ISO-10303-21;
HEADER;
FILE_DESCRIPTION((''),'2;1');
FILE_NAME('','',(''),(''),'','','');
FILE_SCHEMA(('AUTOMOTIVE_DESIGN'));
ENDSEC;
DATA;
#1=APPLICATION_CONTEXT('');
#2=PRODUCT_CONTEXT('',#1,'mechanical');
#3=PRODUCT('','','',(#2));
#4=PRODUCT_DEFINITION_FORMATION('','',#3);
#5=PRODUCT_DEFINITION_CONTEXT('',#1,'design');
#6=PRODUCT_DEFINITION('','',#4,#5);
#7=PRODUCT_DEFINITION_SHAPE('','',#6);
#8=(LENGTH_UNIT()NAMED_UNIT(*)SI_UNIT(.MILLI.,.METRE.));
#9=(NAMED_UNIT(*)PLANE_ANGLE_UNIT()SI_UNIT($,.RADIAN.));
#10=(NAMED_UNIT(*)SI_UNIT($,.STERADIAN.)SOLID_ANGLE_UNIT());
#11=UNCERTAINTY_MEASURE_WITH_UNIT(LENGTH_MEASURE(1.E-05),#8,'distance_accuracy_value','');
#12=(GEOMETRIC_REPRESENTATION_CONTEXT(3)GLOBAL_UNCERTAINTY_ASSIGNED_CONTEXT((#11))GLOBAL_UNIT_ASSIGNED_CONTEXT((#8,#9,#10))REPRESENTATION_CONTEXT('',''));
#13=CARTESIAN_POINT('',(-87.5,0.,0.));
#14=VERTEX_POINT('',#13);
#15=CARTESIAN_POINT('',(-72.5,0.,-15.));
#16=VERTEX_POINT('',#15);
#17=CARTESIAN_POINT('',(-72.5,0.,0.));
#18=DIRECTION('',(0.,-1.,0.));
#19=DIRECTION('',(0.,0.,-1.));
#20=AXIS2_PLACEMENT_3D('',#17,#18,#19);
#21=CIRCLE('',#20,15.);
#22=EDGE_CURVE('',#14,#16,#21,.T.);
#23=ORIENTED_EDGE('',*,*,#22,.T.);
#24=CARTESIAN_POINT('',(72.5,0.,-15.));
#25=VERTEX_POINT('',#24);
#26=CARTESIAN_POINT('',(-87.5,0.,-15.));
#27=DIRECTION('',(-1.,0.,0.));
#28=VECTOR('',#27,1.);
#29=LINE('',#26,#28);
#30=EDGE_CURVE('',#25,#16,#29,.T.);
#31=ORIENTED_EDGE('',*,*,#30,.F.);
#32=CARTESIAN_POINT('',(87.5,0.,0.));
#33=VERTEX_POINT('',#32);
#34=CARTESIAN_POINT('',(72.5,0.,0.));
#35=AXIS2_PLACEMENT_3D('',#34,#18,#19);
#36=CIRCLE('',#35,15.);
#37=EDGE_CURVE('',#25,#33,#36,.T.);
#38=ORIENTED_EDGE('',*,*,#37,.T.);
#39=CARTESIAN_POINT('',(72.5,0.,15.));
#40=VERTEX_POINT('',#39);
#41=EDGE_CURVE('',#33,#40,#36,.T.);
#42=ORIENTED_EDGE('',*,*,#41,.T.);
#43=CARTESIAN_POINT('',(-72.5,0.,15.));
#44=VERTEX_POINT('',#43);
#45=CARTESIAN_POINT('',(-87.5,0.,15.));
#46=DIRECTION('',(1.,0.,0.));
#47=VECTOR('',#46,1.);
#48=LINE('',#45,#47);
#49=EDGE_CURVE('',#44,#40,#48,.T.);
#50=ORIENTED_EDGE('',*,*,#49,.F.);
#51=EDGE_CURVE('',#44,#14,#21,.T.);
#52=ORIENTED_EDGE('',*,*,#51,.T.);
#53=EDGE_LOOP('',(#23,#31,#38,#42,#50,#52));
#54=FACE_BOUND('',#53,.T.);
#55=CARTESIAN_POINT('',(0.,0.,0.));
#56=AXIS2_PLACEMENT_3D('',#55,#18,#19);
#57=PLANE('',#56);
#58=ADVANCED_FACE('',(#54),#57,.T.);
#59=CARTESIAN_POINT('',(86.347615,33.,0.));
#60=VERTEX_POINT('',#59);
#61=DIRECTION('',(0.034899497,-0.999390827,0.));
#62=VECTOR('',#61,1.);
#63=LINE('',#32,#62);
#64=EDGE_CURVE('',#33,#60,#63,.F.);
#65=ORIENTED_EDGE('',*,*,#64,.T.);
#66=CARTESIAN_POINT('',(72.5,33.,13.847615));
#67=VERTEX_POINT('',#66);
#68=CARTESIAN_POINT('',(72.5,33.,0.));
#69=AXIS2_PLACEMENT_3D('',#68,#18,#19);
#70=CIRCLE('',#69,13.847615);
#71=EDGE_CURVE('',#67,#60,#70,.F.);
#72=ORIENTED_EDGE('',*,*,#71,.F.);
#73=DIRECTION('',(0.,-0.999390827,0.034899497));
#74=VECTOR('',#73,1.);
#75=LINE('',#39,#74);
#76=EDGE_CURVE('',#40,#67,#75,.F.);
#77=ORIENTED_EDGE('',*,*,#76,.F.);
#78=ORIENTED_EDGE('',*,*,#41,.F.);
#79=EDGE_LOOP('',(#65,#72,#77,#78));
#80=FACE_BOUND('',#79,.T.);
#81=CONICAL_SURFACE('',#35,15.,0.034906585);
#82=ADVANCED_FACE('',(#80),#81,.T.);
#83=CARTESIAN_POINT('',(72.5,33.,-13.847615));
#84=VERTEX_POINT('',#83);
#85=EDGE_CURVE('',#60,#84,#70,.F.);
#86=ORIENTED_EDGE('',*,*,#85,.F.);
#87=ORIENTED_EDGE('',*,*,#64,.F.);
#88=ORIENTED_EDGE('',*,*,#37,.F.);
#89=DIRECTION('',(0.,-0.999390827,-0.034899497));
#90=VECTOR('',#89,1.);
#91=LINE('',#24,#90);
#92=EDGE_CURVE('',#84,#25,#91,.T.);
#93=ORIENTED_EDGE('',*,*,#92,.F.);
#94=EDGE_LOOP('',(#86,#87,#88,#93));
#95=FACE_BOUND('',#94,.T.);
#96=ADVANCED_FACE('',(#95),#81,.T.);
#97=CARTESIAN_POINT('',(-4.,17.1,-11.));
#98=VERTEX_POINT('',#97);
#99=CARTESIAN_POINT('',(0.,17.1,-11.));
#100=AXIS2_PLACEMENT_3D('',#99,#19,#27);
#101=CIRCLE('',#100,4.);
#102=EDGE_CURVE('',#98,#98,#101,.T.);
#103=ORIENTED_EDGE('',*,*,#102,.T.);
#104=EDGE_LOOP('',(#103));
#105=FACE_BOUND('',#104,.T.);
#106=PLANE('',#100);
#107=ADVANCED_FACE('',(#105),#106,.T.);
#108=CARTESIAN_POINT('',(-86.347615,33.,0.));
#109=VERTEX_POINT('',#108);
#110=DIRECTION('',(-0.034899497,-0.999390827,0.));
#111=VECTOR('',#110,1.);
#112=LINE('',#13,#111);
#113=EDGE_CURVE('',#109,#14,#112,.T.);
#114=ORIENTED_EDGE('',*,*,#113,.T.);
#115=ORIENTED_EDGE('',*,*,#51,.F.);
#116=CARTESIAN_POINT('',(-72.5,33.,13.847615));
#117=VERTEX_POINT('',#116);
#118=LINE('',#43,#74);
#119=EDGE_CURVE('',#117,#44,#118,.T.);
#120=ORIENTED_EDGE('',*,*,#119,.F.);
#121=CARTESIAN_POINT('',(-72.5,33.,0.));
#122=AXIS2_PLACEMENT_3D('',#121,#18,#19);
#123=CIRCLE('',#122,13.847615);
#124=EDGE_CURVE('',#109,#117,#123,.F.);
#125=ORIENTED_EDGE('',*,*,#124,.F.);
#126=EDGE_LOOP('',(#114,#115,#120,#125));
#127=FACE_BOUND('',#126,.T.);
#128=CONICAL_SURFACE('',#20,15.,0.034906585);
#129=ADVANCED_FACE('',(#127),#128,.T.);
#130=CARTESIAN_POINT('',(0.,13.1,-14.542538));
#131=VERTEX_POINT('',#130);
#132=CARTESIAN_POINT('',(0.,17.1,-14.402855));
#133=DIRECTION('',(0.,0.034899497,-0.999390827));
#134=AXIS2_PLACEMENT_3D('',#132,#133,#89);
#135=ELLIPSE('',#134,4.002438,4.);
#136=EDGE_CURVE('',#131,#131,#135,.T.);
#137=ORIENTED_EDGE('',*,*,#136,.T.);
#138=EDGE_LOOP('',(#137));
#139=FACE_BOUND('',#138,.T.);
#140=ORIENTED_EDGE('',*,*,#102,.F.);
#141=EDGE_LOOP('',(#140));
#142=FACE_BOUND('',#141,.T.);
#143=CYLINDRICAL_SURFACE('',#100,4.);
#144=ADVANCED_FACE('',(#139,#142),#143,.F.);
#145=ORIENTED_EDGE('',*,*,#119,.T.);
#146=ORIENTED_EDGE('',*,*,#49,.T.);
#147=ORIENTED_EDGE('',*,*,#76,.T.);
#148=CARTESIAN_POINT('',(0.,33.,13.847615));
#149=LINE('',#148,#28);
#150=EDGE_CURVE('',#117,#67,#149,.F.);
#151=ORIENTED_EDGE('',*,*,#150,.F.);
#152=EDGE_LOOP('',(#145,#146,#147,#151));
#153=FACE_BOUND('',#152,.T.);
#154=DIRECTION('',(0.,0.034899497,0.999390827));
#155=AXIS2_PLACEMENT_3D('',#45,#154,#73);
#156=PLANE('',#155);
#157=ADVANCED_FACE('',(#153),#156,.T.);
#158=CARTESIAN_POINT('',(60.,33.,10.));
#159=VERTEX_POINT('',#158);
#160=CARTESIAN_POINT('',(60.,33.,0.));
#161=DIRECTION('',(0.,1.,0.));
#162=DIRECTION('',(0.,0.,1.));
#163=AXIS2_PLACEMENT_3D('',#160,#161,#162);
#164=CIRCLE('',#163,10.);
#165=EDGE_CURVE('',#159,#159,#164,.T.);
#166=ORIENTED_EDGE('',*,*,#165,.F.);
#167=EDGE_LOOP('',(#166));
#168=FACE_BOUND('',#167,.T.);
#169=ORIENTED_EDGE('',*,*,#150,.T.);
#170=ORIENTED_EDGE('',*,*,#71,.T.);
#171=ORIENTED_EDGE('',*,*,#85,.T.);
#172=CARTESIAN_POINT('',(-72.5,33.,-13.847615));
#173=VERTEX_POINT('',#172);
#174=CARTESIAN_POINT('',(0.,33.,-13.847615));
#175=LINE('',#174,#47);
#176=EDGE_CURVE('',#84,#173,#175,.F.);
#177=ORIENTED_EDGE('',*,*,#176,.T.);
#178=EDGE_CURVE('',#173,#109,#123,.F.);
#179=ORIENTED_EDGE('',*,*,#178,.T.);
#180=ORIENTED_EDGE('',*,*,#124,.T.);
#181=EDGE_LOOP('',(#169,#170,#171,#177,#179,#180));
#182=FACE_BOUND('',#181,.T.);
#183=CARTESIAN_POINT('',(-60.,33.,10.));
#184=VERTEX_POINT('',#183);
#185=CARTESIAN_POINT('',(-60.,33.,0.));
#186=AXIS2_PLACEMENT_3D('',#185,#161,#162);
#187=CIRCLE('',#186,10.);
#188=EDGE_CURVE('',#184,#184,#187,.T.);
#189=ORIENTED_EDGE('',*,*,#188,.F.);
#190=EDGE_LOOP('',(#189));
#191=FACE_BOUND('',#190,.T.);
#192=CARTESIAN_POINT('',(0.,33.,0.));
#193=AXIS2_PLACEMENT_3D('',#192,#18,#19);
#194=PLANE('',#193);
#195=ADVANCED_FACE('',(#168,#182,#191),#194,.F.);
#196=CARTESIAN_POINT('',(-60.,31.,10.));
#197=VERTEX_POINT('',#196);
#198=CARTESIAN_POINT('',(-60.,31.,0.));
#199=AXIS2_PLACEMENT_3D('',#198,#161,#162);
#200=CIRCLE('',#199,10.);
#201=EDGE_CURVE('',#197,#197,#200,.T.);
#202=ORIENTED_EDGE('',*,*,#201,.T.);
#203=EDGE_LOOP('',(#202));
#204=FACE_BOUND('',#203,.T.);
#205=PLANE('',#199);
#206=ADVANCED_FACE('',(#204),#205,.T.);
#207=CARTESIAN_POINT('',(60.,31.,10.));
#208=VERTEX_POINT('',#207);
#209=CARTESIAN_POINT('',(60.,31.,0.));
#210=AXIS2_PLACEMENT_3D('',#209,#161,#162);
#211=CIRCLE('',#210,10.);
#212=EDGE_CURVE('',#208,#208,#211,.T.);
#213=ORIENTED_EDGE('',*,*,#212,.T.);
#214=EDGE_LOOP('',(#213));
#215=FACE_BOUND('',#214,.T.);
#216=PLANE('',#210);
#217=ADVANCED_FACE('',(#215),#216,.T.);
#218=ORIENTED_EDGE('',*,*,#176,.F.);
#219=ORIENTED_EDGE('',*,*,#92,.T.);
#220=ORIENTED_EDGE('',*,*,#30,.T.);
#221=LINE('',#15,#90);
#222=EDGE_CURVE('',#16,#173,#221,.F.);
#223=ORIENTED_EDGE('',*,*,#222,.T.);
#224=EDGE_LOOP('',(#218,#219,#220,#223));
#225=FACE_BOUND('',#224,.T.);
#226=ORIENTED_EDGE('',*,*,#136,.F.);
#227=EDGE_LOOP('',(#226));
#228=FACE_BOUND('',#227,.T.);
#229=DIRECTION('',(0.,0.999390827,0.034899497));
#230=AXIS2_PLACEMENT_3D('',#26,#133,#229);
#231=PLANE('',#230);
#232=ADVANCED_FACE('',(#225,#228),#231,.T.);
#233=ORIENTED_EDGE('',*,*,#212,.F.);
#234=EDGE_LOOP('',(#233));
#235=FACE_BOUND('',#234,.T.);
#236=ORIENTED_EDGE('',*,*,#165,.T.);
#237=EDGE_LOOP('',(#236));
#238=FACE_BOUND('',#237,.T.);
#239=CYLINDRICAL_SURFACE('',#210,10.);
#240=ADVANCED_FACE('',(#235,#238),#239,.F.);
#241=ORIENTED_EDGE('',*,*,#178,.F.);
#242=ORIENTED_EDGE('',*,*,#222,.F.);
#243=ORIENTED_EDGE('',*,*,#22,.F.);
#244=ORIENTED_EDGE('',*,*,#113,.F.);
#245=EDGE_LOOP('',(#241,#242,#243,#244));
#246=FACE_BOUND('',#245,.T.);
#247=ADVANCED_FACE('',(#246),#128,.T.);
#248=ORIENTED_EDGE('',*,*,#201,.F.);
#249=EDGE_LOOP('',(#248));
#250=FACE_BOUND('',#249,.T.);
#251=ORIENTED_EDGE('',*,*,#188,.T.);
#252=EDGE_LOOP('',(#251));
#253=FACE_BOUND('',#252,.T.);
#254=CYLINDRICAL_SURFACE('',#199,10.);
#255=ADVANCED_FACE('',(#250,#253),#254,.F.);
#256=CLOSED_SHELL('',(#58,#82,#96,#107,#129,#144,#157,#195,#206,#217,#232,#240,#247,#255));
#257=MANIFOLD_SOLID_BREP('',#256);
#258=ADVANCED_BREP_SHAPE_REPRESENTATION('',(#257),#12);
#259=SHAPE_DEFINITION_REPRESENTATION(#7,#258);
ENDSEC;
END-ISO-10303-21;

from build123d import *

# Parameters (mm, degrees)
SKETCH1_W           = 175
SKETCH1_H           = 30
BOSS_EXTRUDE1_DEPTH = 33
SKETCH3_R           = 10
CUT_EXTRUDE1_DEPTH  = 2
FILLET1_R           = 15
SKETCH4_R           = 4
CUT_EXTRUDE2_DEPTH  = 4
DRAFT3_ANGLE        = -2


with BuildPart() as part:
    # Sketch1 → Boss-Extrude1 (new body)
    with BuildSketch(Plane(origin=(0, 0, 0), x_dir=(1, 0, 0), z_dir=(0, 1, 0))):
        Rectangle(SKETCH1_W, SKETCH1_H)
    extrude(amount=BOSS_EXTRUDE1_DEPTH)

    # Sketch3 → Cut-Extrude1 (cut)
    with BuildSketch(Plane(origin=(0, 33, 0), x_dir=(1, 0, 0), z_dir=(0, 1, 0))):
        with Locations(Location((-60, 0, 0), (0, 0, 270))):
            Circle(SKETCH3_R)
        with Locations(Location((60, 0, 0), (0, 0, 270))):
            Circle(SKETCH3_R)
    extrude(amount=-CUT_EXTRUDE1_DEPTH, mode=Mode.SUBTRACT)

    # Fillet1
    fillet1_edges = [part.edges().sort_by_distance(p)[0] for p in [
        (-87.5, 16.5, -15),
        (87.5, 16.5, 15),
        (87.5, 16.5, -15),
        (-87.5, 16.5, 15),
    ]]
    fillet(fillet1_edges, radius=FILLET1_R - 0.0001)  # a hair under: the kernel refuses the full size

    # Sketch4 → Cut-Extrude2 (cut)
    with BuildSketch(Plane(origin=(0, 0, -15), x_dir=(-1, 0, 0), z_dir=(0, 0, -1))):
        with Locations((0, 17.1)):
            Circle(SKETCH4_R)
    extrude(amount=-CUT_EXTRUDE2_DEPTH, mode=Mode.SUBTRACT)

    # Draft3
    draft3_faces = [part.faces().sort_by_distance(p)[0] for p in [
        (0, 16.5, 15),
        (83.106631007, 16.5, 10.606631007),
        (83.106631007, 16.5, -10.606631007),
        (0, 1.487079621, -15),
        (-83.106631007, 16.5, 10.606631007),
        (-83.106631007, 16.5, -10.606631007),
    ]]
    draft(draft3_faces, Plane(origin=(0, 0, 0), x_dir=(0, 0, -1), z_dir=(0, -1, 0)), DRAFT3_ANGLE)


solid = part.part
